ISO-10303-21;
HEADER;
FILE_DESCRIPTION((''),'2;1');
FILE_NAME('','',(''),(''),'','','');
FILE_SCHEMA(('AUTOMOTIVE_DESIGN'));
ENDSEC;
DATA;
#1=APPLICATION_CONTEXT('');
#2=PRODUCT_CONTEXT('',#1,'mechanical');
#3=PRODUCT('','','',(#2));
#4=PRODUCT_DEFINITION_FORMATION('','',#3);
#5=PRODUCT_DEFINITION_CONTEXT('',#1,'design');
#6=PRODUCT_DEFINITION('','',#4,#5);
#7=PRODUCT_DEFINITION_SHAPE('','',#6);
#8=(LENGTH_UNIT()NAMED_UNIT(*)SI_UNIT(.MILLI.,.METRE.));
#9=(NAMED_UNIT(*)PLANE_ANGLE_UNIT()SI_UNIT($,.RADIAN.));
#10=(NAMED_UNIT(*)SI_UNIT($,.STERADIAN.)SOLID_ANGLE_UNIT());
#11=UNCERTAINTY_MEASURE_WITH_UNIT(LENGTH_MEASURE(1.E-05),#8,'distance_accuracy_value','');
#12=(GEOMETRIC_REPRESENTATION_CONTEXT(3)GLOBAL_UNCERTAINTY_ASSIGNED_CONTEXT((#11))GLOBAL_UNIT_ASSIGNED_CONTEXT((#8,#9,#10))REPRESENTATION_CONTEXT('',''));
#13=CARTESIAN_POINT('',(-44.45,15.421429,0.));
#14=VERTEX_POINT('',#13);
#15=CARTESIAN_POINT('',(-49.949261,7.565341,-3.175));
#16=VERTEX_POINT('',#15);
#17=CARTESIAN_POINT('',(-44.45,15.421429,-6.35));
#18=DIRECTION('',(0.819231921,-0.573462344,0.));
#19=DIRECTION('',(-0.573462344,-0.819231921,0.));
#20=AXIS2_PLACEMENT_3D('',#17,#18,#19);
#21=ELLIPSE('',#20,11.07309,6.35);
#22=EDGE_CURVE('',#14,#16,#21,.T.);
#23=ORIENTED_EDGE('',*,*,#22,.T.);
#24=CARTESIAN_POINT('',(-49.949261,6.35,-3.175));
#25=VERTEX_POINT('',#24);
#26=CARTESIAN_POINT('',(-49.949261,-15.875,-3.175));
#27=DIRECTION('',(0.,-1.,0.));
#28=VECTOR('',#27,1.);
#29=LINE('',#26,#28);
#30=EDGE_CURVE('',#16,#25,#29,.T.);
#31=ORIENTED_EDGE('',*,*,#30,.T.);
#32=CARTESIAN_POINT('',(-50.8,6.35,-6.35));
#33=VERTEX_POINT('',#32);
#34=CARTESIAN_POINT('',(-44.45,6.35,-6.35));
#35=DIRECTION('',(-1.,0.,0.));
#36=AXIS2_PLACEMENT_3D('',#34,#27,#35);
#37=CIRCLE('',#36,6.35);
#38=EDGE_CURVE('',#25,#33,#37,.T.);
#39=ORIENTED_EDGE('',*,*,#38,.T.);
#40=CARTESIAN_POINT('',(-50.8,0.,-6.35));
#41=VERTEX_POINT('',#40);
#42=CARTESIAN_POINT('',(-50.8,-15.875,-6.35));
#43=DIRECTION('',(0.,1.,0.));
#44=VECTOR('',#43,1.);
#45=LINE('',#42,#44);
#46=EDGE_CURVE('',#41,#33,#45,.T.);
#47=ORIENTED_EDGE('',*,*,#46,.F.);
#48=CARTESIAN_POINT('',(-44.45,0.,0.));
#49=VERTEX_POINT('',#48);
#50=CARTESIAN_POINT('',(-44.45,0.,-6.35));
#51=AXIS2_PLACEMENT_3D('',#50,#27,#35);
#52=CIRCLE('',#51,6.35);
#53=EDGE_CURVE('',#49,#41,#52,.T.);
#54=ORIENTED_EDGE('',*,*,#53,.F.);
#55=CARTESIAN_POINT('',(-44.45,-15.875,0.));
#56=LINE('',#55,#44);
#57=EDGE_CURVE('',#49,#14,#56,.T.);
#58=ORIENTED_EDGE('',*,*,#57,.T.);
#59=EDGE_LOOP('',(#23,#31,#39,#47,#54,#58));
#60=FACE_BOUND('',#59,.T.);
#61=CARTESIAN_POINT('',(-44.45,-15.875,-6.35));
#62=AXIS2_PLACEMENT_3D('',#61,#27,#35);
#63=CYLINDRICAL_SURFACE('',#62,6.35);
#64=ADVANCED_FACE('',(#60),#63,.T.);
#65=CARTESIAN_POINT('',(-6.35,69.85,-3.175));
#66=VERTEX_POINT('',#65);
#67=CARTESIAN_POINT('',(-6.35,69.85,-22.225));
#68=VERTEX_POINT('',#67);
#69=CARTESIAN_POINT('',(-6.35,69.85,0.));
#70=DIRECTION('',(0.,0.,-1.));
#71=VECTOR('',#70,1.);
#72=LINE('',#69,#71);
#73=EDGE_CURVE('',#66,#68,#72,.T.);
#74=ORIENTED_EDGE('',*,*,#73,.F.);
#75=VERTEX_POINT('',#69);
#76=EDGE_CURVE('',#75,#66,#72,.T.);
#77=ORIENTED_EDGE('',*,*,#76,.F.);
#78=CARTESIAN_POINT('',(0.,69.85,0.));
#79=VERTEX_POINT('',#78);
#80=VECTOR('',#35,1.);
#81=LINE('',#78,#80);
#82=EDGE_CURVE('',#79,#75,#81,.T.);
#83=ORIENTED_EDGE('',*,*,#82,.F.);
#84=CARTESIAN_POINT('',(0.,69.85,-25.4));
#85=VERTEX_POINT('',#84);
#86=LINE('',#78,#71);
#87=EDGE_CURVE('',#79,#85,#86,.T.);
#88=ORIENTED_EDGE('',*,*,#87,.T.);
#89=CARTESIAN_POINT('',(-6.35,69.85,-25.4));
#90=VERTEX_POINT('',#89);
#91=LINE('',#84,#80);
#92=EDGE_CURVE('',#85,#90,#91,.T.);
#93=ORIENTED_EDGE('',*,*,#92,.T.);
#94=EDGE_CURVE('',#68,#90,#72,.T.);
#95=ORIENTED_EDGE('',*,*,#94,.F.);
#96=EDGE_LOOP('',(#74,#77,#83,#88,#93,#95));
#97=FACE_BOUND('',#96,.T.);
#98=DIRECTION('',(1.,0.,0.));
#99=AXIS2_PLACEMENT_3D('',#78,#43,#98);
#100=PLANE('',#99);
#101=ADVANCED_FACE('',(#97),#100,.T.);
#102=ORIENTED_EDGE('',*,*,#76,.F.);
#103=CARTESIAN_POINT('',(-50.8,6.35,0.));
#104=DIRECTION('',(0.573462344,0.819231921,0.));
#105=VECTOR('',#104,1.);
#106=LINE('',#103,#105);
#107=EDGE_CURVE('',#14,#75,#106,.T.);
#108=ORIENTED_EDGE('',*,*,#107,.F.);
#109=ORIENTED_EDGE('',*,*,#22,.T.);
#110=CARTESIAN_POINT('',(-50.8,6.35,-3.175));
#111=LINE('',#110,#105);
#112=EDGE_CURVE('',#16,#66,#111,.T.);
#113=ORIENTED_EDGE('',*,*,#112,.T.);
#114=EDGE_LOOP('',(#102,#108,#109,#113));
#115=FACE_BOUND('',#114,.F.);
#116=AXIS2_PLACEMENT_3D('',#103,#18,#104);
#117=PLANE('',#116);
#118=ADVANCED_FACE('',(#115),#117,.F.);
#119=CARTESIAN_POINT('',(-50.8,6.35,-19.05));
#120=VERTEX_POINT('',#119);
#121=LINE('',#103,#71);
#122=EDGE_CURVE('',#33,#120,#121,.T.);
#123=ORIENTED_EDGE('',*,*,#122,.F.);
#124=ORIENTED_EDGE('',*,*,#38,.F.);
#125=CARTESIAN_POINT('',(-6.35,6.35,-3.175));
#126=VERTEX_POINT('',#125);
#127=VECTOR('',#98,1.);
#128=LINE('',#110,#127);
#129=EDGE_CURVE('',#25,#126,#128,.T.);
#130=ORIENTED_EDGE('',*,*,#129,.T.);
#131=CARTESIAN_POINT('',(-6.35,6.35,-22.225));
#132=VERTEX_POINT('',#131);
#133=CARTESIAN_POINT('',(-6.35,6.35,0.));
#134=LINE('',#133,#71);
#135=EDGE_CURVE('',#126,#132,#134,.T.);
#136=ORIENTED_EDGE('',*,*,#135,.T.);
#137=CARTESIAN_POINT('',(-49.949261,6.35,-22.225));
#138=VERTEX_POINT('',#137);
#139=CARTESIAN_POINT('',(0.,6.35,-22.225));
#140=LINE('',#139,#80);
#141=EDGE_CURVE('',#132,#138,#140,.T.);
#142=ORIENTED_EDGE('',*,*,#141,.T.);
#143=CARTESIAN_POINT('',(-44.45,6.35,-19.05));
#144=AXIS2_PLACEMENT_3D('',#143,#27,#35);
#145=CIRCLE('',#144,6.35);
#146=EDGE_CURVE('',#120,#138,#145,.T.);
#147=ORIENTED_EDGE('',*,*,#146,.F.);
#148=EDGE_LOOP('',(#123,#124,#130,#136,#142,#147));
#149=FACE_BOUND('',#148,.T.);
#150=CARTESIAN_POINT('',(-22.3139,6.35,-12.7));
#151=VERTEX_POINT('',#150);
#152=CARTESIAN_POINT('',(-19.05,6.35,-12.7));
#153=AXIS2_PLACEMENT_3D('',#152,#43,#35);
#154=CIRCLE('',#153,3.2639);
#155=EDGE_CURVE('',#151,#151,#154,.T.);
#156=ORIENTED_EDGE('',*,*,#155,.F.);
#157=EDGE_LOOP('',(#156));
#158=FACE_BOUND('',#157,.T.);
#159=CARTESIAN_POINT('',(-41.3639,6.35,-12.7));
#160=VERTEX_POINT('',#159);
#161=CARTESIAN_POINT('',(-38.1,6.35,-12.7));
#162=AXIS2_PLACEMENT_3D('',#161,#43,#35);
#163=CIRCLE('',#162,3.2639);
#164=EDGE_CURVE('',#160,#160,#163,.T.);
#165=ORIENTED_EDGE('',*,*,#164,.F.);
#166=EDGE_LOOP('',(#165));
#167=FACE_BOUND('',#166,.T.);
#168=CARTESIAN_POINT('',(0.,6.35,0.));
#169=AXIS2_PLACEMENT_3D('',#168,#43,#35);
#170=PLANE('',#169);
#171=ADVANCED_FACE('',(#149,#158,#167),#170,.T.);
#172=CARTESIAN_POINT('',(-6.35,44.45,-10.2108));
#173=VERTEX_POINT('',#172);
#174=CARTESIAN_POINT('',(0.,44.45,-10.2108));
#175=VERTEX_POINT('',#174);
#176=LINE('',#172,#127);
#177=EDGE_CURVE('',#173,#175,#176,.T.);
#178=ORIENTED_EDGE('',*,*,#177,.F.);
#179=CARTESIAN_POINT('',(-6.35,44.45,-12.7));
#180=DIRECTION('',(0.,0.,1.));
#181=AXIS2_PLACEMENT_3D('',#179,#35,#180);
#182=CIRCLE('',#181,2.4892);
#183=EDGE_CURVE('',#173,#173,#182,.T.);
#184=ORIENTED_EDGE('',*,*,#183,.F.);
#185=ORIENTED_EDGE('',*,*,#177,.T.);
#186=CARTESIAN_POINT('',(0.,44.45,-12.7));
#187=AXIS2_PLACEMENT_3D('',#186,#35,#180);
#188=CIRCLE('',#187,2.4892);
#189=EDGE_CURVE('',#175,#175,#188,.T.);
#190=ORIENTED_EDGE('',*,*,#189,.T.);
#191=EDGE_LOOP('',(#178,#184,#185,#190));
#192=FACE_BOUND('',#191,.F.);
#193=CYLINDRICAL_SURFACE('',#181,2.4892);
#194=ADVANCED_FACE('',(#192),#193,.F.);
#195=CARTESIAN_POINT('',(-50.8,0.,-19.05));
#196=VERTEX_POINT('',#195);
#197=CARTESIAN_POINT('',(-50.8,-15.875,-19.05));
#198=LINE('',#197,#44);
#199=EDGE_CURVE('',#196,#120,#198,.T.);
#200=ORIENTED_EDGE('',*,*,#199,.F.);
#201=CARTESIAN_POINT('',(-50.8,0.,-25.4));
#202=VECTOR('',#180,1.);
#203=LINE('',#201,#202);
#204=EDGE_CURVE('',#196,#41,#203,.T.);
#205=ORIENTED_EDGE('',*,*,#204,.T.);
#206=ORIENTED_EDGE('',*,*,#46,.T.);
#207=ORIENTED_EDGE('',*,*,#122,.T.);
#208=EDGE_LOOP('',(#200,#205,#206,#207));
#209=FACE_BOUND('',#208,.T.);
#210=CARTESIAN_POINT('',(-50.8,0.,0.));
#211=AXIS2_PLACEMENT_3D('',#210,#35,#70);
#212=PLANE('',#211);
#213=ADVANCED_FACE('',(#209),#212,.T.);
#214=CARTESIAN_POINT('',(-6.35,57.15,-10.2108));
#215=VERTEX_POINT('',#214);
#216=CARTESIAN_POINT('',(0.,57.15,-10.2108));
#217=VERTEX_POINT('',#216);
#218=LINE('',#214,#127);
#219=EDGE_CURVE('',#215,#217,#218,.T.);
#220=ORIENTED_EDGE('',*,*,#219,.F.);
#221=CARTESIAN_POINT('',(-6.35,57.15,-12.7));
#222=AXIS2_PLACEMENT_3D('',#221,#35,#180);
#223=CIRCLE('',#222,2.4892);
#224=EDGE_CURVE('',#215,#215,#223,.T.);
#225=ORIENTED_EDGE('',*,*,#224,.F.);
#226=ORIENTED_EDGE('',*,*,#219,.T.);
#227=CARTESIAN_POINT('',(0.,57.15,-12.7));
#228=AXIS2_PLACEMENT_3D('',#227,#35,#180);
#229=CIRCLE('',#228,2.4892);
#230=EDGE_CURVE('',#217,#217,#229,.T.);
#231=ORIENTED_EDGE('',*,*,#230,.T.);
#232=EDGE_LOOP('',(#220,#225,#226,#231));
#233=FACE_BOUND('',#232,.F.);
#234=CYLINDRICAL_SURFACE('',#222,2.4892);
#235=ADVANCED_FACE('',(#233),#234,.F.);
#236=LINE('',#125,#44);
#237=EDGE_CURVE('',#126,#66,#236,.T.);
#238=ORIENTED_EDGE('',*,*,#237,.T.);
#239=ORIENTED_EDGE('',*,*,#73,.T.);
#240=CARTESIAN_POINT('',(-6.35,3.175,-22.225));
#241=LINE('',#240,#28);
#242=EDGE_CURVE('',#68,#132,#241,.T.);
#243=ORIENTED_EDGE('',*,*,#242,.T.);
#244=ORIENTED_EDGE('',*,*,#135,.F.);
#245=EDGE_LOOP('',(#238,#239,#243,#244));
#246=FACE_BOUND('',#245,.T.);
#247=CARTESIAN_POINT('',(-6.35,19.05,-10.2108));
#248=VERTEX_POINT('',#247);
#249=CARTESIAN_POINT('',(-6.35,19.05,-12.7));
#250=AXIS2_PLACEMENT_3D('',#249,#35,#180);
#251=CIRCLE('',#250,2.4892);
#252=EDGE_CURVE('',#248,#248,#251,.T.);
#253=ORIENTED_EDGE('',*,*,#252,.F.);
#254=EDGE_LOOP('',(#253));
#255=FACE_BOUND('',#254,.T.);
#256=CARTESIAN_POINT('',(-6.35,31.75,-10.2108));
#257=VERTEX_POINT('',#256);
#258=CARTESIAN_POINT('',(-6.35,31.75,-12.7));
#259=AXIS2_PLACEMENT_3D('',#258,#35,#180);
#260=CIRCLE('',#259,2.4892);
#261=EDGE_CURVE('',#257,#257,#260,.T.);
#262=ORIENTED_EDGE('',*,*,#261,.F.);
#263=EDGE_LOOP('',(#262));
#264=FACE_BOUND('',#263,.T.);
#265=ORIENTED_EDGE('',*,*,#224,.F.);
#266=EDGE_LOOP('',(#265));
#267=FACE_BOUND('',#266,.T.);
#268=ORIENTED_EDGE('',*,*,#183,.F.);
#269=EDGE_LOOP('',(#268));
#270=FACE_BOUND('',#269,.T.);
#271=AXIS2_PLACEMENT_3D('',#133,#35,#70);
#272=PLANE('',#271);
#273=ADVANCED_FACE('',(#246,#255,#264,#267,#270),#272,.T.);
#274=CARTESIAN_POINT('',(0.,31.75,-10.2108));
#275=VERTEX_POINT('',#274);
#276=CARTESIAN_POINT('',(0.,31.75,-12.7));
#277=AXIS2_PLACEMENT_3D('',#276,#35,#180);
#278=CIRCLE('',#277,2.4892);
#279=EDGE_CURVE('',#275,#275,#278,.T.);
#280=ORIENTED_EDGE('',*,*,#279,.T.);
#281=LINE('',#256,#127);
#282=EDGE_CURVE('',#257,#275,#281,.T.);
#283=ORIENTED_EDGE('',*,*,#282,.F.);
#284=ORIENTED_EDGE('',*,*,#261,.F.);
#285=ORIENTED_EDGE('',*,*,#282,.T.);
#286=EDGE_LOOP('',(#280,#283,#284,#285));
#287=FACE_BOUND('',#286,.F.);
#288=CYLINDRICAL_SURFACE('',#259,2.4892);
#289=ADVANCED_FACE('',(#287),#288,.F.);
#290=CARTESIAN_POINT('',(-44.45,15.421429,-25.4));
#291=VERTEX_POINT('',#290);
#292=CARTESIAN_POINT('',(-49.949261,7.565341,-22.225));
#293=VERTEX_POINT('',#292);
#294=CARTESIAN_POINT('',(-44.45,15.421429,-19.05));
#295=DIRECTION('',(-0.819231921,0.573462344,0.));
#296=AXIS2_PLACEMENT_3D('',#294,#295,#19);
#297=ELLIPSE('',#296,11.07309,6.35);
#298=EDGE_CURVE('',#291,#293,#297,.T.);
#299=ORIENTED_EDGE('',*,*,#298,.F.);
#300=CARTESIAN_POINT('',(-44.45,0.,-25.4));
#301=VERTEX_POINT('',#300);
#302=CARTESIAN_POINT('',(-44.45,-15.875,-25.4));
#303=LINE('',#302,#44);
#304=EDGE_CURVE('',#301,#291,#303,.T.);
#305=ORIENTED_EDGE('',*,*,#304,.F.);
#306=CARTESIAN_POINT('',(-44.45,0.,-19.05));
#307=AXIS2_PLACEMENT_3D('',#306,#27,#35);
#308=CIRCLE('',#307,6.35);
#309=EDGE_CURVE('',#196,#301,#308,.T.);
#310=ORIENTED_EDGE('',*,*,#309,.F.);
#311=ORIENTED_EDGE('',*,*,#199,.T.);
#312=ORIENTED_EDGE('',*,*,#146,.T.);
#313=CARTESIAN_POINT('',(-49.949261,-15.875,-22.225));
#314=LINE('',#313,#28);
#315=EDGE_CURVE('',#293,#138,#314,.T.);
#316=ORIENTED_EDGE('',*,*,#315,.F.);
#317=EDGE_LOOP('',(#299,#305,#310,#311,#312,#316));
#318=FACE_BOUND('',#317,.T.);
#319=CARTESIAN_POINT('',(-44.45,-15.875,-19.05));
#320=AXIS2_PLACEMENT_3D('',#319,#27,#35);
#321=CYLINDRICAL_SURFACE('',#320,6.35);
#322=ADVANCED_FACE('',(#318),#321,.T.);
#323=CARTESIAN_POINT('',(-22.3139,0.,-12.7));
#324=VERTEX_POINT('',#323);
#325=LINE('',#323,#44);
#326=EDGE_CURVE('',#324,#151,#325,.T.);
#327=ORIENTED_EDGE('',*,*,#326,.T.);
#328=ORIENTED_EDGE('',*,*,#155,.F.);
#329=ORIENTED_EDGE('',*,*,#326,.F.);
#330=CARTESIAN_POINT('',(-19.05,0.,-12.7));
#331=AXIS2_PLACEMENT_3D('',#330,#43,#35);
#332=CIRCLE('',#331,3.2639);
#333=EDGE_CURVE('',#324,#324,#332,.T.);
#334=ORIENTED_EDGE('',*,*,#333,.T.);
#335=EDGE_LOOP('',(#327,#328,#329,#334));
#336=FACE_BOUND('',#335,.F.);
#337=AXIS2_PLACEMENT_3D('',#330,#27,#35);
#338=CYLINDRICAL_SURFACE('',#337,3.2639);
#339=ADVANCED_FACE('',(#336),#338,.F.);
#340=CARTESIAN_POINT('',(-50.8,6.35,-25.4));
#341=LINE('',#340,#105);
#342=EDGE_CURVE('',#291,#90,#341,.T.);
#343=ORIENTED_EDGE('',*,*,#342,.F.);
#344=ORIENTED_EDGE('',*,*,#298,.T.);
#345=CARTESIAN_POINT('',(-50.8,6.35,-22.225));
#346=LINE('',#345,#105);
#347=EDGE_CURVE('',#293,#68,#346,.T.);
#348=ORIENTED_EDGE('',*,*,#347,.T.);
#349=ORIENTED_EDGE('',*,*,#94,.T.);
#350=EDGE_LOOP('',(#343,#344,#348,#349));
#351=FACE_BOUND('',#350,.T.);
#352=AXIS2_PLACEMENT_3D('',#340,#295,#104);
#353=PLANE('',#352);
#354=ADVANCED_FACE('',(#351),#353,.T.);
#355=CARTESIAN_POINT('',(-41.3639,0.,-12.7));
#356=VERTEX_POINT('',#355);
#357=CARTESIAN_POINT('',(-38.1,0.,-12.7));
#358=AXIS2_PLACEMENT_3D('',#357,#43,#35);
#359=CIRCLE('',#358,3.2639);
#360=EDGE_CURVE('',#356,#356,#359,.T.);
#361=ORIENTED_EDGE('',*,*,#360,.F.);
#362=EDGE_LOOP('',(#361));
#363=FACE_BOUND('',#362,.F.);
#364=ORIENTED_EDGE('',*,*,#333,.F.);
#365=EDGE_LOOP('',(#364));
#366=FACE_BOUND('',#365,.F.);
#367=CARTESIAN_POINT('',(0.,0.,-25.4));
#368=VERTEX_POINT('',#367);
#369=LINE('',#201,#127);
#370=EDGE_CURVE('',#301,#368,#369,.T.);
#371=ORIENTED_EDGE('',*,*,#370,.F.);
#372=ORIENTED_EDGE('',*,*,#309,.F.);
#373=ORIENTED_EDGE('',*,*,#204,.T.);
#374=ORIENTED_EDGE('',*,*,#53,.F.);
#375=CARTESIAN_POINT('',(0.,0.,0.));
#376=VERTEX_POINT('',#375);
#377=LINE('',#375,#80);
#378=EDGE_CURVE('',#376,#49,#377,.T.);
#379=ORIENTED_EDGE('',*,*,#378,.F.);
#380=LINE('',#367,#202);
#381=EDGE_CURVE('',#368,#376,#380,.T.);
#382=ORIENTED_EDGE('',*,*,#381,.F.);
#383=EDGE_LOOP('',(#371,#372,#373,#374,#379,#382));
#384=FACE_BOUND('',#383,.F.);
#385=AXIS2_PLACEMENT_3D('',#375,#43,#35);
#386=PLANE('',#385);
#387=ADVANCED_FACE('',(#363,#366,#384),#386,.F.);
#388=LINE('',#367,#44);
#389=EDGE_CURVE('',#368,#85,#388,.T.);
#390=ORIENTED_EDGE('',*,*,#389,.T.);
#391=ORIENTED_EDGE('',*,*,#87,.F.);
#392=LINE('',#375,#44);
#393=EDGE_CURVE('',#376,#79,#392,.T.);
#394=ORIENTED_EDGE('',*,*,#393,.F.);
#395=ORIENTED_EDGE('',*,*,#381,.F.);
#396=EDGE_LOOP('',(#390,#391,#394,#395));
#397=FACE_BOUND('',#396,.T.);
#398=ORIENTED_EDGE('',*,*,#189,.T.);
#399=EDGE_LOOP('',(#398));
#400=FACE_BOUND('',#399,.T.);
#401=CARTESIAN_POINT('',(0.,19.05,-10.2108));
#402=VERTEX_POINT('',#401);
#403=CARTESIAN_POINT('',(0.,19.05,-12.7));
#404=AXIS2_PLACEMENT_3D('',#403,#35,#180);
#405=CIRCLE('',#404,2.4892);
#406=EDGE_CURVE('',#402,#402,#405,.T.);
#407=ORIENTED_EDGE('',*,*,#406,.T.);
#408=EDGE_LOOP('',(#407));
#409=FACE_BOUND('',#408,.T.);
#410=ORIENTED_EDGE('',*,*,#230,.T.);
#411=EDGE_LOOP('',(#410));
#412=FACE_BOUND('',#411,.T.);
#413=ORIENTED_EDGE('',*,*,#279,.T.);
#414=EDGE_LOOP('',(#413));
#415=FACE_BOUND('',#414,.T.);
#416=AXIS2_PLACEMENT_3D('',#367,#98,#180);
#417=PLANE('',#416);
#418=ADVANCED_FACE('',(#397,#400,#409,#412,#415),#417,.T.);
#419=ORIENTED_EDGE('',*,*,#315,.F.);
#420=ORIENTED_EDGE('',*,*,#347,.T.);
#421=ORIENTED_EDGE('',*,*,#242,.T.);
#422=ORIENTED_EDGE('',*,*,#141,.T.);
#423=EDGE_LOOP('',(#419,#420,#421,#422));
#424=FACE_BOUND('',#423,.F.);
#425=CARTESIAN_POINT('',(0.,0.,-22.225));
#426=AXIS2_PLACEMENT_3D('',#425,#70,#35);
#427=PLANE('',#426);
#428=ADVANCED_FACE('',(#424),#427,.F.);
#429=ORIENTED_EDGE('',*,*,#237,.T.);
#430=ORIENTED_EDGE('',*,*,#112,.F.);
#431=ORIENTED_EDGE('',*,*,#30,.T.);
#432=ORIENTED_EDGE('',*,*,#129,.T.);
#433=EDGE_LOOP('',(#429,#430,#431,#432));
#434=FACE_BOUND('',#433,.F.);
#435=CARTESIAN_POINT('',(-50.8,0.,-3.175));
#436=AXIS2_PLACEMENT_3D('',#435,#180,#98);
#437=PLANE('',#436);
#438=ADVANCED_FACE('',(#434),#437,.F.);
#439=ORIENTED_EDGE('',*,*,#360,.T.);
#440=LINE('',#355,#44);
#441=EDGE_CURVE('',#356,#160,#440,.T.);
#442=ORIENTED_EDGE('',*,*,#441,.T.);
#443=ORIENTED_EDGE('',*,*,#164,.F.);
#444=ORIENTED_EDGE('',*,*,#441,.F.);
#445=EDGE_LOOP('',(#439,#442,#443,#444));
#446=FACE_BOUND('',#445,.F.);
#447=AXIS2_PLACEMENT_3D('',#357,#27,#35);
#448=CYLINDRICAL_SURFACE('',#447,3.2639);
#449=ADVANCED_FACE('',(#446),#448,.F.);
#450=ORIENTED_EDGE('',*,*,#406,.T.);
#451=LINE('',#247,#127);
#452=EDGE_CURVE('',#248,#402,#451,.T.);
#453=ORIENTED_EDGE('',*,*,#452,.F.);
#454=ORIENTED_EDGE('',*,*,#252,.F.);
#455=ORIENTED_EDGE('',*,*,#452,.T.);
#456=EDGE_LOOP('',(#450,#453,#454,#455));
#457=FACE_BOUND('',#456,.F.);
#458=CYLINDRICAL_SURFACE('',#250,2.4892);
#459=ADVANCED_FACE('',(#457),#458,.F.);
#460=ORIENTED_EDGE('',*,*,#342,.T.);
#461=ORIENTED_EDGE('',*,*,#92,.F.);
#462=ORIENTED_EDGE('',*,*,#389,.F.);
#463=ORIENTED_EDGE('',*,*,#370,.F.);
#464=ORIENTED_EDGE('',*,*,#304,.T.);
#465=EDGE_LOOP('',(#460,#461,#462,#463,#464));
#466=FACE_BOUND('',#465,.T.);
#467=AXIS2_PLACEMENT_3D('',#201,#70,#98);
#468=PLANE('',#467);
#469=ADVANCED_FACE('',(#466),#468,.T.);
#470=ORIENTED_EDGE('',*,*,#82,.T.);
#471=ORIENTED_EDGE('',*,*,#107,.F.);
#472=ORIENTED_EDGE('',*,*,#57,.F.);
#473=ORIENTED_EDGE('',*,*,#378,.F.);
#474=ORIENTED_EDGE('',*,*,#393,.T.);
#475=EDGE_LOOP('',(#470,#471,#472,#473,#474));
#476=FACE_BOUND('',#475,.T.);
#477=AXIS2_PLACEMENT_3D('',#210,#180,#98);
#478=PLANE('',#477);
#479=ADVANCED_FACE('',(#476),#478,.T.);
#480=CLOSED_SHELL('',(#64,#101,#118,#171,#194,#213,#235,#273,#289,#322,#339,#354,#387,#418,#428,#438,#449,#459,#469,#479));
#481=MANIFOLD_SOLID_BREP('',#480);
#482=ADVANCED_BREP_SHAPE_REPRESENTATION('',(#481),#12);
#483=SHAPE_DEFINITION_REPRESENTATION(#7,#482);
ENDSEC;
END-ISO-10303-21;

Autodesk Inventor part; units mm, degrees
ref_plane "YZ Plane" through (0, 0, 0) normal (1, 0, 0) x (0, 1, 0)
ref_plane "XZ Plane" through (0, 0, 0) normal (0, 1, 0) x (-1, 0, 0)
ref_plane "XY Plane" through (0, 0, 0) normal (0, 0, 1) x (1, 0, 0)
sketch "Sketch1" plane through (0, 0, 0) normal (0, 1, 0) x (-1, 0, 0)
  line L0 (0, 0) -> (50.8, 0)
  line L1 (50.8, 0) -> (50.8, -25.4)
  line L2 (50.8, -25.4) -> (0, -25.4)
  line L3 (0, -25.4) -> (0, 0)
  circle A0 centre (19.05, -12.7) radius 3.2639
  circle A1 centre (38.1, -12.7) radius 3.2639
  point P0 (0, -12.7)
  dimension "d0" = 50.8
  dimension "d1" = 25.4
  dimension "d2" = 6.5278
  dimension "d3" = 19.05
  dimension "d4" = 19.05
  dimension "d5" = 12.7
extrude "Extrusion1" add sketch "Sketch1" along normal blind 6.35
sketch "Sketch2" plane through (0, 6.35, 0) normal (0, 1, 0) x (1, 0, 0)
  line L0 (0, 25.4) -> (-50.8, 25.4) projected
  line L1 (0, 0) -> (-6.35, 0)
  line L2 (-6.35, 0) -> (-6.35, 25.4)
  line L3 (-6.35, 25.4) -> (0, 25.4)
  line L4 (0, 25.4) -> (0, 0)
  dimension "d8" = 6.35
extrude "Extrusion2" add sketch "Sketch2" along normal blind 63.5
sketch "Sketch3" plane through (-6.35, 6.35, -25.4) normal (-1, 0, 0) x (0, 0, 1)
  circle A0 centre (12.7, 12.7) radius 2.4892
  circle A1 centre (12.7, 38.1) radius 2.4892
  line L0 (0, 0) -> (25.4, 0) projected
  line L1 (25.4, 0) -> (25.4, 63.5) projected
  circle A2 centre (12.7, 50.8) radius 2.4892
  circle A3 centre (12.7, 25.4) radius 2.4892
  point P0 (25.4, -6.35)
  dimension "d11" = 4.9784
  dimension "d12" = 4.9784
  dimension "d13" = 25.4
  dimension "d14" = 12.7
  dimension "d15" = 12.7
  dimension "d23" = 12.7
  dimension "d24" = 12.7
extrude "Extrusion3" cut sketch "Sketch3" against normal through all
sketch "Sketch4" plane through (-50.8, 0, 0) normal (0, 0, 1) x (1, 0, 0)
  line L0 (0, 6.35) -> (44.45, 6.35) projected
  line L1 (0, 0) -> (50.8, 0) projected
  line L2 (50.8, 0) -> (50.8, 69.85) projected
  line L3 (44.45, 69.85) -> (50.8, 69.85) projected
  line L4 (44.45, 6.35) -> (44.45, 69.85) projected
  line L5 (0, 6.35) -> (44.45, 6.35) projected
  line L6 (0, 0) -> (0, 6.35) projected
  line L7 (0, 6.35) -> (44.45, 69.85)
  line L8 (50.8, 69.85) -> (50.8, 0)
  line L9 (0, 0) -> (0, 6.35)
  line L10 (50.8, 0) -> (0, 0)
  line L11 (44.45, 69.85) -> (50.8, 69.85)
extrude "Extrusion4" add sketch "Sketch4" against normal blind 3.175 contours L7 L4 L0
sketch "Sketch5" plane through (0, 0, -25.4) normal (0, 0, -1) x (-1, 0, 0)
  line L0 (0, 0) -> (50.8, 0) projected
  line L1 (50.8, 0) -> (50.8, 6.35) projected
  line L2 (6.35, 6.35) -> (50.8, 6.35) projected
  line L3 (6.35, 6.35) -> (6.35, 69.85) projected
  line L4 (0, 69.85) -> (6.35, 69.85) projected
  line L5 (0, 0) -> (0, 69.85) projected
  line L6 (50.8, 6.35) -> (50.8, 0)
  line L7 (0, 0) -> (50.8, 0)
  line L8 (50.8, 6.35) -> (6.35, 69.85)
  line L9 (0, 0) -> (0, 69.85) projected
  line L10 (6.35, 69.85) -> (0, 69.85)
  line L11 (0, 69.85) -> (0, 0)
extrude "Extrusion5" add sketch "Sketch5" against normal blind 3.175
fillet "Fillet1" radius 6.35 2 edges at (-50.8, 3.175, -25.4) (-50.8, 3.175, 0)
properties part number "INDX_005_Cornerbracket" material "ABS Plastic"
